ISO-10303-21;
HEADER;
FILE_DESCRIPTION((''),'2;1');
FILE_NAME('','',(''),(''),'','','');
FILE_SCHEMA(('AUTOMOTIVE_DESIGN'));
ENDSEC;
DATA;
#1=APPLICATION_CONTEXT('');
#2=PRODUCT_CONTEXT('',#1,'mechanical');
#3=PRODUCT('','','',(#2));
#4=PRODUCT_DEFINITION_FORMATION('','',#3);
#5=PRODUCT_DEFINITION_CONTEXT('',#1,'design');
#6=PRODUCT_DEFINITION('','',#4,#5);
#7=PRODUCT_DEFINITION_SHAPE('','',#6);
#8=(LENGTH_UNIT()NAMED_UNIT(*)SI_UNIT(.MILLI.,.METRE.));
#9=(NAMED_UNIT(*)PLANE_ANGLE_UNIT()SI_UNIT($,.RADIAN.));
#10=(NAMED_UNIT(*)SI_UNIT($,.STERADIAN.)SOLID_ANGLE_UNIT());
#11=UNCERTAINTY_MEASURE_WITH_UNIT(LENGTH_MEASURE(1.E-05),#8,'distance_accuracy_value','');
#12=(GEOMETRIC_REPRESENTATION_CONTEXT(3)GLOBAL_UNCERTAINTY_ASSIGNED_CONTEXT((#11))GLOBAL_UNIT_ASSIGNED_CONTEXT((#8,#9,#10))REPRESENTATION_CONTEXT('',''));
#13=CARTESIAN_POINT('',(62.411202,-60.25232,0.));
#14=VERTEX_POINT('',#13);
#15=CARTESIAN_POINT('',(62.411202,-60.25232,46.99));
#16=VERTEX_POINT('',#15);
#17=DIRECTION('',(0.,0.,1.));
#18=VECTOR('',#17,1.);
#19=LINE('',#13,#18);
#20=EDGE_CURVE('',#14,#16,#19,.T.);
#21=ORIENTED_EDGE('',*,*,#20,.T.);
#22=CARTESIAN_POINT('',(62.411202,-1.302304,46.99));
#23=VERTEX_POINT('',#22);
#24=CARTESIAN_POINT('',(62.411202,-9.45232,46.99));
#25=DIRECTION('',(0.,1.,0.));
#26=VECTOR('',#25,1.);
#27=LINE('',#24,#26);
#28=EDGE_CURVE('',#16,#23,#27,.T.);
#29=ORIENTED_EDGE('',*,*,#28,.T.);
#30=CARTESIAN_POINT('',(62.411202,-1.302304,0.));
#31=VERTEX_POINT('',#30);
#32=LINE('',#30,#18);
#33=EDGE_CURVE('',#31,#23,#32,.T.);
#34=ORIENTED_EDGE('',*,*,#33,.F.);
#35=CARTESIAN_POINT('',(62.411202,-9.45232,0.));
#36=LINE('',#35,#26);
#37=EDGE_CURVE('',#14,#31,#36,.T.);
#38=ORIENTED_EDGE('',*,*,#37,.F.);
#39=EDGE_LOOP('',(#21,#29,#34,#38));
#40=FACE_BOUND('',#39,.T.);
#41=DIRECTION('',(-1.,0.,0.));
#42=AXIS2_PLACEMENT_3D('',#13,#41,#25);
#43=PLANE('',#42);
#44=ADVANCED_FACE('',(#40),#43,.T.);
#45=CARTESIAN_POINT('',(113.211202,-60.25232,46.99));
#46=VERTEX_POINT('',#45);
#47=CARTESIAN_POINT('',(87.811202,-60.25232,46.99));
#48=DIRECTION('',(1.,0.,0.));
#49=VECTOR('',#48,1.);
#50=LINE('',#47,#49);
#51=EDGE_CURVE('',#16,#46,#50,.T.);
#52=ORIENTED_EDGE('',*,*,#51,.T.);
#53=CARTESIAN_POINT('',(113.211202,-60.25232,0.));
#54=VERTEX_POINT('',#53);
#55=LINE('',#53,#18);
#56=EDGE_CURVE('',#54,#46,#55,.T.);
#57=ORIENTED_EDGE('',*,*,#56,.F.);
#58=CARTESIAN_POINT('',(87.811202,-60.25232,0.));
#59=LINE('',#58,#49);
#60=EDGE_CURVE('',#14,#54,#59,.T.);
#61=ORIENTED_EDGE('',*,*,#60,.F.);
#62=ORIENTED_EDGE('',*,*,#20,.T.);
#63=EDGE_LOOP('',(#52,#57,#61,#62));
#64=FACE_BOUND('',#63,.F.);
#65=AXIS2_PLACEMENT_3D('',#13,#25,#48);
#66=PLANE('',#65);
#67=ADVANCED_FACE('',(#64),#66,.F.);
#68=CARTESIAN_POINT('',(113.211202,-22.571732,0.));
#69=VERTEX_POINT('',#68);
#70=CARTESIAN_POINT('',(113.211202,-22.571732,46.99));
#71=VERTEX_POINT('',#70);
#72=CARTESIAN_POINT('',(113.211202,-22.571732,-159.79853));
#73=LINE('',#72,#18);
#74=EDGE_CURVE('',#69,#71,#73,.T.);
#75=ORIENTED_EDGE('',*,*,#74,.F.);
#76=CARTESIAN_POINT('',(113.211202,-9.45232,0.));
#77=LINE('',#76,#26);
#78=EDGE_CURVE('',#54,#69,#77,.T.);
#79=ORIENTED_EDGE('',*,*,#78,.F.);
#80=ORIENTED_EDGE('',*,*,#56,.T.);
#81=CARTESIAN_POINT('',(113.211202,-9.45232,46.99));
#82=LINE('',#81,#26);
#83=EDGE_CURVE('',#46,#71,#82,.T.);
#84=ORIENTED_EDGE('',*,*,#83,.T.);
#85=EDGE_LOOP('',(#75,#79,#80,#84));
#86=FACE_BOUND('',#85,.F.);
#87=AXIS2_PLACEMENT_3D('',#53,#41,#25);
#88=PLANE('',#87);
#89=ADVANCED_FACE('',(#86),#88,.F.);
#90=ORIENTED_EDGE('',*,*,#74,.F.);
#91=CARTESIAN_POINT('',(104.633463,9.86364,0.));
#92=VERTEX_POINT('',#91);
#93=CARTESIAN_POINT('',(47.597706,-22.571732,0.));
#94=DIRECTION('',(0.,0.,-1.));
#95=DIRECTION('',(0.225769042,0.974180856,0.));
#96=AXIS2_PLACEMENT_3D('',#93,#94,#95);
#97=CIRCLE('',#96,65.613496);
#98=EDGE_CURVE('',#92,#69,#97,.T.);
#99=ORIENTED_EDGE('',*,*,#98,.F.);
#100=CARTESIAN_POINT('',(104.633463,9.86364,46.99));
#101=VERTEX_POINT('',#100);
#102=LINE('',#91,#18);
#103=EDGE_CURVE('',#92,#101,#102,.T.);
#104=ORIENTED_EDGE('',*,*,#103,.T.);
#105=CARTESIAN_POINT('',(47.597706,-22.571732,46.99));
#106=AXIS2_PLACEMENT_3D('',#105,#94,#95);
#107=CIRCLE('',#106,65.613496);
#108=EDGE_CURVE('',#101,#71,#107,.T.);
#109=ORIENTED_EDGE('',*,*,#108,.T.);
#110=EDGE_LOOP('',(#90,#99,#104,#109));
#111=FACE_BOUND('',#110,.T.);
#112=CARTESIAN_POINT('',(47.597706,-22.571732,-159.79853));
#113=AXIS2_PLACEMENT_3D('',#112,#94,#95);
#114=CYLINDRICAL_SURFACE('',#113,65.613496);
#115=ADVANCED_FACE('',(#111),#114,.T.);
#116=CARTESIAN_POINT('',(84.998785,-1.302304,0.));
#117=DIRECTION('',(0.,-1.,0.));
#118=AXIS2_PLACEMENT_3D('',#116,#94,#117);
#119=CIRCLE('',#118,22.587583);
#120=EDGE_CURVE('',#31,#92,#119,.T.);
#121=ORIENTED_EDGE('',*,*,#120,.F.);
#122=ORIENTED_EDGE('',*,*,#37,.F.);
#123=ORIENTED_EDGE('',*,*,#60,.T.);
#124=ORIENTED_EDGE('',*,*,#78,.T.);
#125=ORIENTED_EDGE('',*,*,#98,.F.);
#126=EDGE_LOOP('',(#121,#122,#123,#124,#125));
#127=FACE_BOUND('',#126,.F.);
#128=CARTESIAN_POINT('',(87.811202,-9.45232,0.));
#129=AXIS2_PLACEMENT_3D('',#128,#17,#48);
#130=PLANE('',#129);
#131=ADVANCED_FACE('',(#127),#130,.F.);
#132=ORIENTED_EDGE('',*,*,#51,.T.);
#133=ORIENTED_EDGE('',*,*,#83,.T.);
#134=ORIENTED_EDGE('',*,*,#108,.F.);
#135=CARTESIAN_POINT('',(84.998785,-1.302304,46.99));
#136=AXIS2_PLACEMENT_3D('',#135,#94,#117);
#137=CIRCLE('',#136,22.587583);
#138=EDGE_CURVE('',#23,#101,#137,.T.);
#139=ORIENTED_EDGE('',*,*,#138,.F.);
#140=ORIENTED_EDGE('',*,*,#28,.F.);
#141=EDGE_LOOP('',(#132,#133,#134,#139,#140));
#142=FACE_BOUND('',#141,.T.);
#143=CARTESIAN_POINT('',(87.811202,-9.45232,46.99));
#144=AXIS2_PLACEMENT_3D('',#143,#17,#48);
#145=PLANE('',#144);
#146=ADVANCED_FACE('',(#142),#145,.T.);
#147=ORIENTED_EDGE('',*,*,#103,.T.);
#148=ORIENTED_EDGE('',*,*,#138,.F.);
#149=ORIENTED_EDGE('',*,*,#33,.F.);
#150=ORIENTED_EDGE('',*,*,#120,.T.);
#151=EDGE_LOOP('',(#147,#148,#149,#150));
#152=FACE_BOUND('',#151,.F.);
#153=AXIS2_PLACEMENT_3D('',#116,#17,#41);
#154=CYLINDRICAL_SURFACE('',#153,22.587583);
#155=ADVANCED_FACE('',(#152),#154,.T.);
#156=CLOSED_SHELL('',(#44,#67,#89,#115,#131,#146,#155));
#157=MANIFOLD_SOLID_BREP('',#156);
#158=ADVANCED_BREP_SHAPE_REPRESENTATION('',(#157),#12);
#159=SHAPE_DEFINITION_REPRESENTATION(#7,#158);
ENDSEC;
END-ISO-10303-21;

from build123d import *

# Parameters (mm, degrees)
F0_W        = 50.8
F0_H        = 101.6
F1_DEPTH    = 46.99
F2_T1_DEPTH = 366.5870593472
F3_R        = 22.587582604


# Not quite as in the source:
# - a fillet or chamfer that OpenCascade refuses, or shapes differently, is made with other operations: its cross-section is extruded or revolved along the edge and cut away or added


with BuildPart() as f1:
    # F0 (on Top) → F1 (new body)
    with BuildSketch(Plane.XY):
        with Locations((87.8112020218, -9.4523200796)):
            Rectangle(F0_W, F0_H)
    extrude(amount=F1_DEPTH)

    # F2: fillet of radius 65.6134961982 on 1 edges, made by hand

    # F2_s2 → F2_t1 (cut)
    with BuildSketch(Plane.XY.offset(-159.7985296736)):
        with BuildLine():
            ThreePointArc((62.4112020218, 41.3476799204), (98.964505217, 18.2520699738), (113.2112020218, -22.571731949))
            Line((113.2112020218, -22.571731949), (113.2112020218, 41.3476799204))
            Line((113.2112020218, 41.3476799204), (62.4112020218, 41.3476799204))
        make_face()
    extrude(amount=F2_T1_DEPTH, mode=Mode.SUBTRACT)

    # F3
    f3_edges = [f1.edges().sort_by_distance(p)[0] for p in [
        (62.411202, 41.34768, 23.495),
    ]]
    fillet(f3_edges, radius=F3_R)


solid = f1.part
